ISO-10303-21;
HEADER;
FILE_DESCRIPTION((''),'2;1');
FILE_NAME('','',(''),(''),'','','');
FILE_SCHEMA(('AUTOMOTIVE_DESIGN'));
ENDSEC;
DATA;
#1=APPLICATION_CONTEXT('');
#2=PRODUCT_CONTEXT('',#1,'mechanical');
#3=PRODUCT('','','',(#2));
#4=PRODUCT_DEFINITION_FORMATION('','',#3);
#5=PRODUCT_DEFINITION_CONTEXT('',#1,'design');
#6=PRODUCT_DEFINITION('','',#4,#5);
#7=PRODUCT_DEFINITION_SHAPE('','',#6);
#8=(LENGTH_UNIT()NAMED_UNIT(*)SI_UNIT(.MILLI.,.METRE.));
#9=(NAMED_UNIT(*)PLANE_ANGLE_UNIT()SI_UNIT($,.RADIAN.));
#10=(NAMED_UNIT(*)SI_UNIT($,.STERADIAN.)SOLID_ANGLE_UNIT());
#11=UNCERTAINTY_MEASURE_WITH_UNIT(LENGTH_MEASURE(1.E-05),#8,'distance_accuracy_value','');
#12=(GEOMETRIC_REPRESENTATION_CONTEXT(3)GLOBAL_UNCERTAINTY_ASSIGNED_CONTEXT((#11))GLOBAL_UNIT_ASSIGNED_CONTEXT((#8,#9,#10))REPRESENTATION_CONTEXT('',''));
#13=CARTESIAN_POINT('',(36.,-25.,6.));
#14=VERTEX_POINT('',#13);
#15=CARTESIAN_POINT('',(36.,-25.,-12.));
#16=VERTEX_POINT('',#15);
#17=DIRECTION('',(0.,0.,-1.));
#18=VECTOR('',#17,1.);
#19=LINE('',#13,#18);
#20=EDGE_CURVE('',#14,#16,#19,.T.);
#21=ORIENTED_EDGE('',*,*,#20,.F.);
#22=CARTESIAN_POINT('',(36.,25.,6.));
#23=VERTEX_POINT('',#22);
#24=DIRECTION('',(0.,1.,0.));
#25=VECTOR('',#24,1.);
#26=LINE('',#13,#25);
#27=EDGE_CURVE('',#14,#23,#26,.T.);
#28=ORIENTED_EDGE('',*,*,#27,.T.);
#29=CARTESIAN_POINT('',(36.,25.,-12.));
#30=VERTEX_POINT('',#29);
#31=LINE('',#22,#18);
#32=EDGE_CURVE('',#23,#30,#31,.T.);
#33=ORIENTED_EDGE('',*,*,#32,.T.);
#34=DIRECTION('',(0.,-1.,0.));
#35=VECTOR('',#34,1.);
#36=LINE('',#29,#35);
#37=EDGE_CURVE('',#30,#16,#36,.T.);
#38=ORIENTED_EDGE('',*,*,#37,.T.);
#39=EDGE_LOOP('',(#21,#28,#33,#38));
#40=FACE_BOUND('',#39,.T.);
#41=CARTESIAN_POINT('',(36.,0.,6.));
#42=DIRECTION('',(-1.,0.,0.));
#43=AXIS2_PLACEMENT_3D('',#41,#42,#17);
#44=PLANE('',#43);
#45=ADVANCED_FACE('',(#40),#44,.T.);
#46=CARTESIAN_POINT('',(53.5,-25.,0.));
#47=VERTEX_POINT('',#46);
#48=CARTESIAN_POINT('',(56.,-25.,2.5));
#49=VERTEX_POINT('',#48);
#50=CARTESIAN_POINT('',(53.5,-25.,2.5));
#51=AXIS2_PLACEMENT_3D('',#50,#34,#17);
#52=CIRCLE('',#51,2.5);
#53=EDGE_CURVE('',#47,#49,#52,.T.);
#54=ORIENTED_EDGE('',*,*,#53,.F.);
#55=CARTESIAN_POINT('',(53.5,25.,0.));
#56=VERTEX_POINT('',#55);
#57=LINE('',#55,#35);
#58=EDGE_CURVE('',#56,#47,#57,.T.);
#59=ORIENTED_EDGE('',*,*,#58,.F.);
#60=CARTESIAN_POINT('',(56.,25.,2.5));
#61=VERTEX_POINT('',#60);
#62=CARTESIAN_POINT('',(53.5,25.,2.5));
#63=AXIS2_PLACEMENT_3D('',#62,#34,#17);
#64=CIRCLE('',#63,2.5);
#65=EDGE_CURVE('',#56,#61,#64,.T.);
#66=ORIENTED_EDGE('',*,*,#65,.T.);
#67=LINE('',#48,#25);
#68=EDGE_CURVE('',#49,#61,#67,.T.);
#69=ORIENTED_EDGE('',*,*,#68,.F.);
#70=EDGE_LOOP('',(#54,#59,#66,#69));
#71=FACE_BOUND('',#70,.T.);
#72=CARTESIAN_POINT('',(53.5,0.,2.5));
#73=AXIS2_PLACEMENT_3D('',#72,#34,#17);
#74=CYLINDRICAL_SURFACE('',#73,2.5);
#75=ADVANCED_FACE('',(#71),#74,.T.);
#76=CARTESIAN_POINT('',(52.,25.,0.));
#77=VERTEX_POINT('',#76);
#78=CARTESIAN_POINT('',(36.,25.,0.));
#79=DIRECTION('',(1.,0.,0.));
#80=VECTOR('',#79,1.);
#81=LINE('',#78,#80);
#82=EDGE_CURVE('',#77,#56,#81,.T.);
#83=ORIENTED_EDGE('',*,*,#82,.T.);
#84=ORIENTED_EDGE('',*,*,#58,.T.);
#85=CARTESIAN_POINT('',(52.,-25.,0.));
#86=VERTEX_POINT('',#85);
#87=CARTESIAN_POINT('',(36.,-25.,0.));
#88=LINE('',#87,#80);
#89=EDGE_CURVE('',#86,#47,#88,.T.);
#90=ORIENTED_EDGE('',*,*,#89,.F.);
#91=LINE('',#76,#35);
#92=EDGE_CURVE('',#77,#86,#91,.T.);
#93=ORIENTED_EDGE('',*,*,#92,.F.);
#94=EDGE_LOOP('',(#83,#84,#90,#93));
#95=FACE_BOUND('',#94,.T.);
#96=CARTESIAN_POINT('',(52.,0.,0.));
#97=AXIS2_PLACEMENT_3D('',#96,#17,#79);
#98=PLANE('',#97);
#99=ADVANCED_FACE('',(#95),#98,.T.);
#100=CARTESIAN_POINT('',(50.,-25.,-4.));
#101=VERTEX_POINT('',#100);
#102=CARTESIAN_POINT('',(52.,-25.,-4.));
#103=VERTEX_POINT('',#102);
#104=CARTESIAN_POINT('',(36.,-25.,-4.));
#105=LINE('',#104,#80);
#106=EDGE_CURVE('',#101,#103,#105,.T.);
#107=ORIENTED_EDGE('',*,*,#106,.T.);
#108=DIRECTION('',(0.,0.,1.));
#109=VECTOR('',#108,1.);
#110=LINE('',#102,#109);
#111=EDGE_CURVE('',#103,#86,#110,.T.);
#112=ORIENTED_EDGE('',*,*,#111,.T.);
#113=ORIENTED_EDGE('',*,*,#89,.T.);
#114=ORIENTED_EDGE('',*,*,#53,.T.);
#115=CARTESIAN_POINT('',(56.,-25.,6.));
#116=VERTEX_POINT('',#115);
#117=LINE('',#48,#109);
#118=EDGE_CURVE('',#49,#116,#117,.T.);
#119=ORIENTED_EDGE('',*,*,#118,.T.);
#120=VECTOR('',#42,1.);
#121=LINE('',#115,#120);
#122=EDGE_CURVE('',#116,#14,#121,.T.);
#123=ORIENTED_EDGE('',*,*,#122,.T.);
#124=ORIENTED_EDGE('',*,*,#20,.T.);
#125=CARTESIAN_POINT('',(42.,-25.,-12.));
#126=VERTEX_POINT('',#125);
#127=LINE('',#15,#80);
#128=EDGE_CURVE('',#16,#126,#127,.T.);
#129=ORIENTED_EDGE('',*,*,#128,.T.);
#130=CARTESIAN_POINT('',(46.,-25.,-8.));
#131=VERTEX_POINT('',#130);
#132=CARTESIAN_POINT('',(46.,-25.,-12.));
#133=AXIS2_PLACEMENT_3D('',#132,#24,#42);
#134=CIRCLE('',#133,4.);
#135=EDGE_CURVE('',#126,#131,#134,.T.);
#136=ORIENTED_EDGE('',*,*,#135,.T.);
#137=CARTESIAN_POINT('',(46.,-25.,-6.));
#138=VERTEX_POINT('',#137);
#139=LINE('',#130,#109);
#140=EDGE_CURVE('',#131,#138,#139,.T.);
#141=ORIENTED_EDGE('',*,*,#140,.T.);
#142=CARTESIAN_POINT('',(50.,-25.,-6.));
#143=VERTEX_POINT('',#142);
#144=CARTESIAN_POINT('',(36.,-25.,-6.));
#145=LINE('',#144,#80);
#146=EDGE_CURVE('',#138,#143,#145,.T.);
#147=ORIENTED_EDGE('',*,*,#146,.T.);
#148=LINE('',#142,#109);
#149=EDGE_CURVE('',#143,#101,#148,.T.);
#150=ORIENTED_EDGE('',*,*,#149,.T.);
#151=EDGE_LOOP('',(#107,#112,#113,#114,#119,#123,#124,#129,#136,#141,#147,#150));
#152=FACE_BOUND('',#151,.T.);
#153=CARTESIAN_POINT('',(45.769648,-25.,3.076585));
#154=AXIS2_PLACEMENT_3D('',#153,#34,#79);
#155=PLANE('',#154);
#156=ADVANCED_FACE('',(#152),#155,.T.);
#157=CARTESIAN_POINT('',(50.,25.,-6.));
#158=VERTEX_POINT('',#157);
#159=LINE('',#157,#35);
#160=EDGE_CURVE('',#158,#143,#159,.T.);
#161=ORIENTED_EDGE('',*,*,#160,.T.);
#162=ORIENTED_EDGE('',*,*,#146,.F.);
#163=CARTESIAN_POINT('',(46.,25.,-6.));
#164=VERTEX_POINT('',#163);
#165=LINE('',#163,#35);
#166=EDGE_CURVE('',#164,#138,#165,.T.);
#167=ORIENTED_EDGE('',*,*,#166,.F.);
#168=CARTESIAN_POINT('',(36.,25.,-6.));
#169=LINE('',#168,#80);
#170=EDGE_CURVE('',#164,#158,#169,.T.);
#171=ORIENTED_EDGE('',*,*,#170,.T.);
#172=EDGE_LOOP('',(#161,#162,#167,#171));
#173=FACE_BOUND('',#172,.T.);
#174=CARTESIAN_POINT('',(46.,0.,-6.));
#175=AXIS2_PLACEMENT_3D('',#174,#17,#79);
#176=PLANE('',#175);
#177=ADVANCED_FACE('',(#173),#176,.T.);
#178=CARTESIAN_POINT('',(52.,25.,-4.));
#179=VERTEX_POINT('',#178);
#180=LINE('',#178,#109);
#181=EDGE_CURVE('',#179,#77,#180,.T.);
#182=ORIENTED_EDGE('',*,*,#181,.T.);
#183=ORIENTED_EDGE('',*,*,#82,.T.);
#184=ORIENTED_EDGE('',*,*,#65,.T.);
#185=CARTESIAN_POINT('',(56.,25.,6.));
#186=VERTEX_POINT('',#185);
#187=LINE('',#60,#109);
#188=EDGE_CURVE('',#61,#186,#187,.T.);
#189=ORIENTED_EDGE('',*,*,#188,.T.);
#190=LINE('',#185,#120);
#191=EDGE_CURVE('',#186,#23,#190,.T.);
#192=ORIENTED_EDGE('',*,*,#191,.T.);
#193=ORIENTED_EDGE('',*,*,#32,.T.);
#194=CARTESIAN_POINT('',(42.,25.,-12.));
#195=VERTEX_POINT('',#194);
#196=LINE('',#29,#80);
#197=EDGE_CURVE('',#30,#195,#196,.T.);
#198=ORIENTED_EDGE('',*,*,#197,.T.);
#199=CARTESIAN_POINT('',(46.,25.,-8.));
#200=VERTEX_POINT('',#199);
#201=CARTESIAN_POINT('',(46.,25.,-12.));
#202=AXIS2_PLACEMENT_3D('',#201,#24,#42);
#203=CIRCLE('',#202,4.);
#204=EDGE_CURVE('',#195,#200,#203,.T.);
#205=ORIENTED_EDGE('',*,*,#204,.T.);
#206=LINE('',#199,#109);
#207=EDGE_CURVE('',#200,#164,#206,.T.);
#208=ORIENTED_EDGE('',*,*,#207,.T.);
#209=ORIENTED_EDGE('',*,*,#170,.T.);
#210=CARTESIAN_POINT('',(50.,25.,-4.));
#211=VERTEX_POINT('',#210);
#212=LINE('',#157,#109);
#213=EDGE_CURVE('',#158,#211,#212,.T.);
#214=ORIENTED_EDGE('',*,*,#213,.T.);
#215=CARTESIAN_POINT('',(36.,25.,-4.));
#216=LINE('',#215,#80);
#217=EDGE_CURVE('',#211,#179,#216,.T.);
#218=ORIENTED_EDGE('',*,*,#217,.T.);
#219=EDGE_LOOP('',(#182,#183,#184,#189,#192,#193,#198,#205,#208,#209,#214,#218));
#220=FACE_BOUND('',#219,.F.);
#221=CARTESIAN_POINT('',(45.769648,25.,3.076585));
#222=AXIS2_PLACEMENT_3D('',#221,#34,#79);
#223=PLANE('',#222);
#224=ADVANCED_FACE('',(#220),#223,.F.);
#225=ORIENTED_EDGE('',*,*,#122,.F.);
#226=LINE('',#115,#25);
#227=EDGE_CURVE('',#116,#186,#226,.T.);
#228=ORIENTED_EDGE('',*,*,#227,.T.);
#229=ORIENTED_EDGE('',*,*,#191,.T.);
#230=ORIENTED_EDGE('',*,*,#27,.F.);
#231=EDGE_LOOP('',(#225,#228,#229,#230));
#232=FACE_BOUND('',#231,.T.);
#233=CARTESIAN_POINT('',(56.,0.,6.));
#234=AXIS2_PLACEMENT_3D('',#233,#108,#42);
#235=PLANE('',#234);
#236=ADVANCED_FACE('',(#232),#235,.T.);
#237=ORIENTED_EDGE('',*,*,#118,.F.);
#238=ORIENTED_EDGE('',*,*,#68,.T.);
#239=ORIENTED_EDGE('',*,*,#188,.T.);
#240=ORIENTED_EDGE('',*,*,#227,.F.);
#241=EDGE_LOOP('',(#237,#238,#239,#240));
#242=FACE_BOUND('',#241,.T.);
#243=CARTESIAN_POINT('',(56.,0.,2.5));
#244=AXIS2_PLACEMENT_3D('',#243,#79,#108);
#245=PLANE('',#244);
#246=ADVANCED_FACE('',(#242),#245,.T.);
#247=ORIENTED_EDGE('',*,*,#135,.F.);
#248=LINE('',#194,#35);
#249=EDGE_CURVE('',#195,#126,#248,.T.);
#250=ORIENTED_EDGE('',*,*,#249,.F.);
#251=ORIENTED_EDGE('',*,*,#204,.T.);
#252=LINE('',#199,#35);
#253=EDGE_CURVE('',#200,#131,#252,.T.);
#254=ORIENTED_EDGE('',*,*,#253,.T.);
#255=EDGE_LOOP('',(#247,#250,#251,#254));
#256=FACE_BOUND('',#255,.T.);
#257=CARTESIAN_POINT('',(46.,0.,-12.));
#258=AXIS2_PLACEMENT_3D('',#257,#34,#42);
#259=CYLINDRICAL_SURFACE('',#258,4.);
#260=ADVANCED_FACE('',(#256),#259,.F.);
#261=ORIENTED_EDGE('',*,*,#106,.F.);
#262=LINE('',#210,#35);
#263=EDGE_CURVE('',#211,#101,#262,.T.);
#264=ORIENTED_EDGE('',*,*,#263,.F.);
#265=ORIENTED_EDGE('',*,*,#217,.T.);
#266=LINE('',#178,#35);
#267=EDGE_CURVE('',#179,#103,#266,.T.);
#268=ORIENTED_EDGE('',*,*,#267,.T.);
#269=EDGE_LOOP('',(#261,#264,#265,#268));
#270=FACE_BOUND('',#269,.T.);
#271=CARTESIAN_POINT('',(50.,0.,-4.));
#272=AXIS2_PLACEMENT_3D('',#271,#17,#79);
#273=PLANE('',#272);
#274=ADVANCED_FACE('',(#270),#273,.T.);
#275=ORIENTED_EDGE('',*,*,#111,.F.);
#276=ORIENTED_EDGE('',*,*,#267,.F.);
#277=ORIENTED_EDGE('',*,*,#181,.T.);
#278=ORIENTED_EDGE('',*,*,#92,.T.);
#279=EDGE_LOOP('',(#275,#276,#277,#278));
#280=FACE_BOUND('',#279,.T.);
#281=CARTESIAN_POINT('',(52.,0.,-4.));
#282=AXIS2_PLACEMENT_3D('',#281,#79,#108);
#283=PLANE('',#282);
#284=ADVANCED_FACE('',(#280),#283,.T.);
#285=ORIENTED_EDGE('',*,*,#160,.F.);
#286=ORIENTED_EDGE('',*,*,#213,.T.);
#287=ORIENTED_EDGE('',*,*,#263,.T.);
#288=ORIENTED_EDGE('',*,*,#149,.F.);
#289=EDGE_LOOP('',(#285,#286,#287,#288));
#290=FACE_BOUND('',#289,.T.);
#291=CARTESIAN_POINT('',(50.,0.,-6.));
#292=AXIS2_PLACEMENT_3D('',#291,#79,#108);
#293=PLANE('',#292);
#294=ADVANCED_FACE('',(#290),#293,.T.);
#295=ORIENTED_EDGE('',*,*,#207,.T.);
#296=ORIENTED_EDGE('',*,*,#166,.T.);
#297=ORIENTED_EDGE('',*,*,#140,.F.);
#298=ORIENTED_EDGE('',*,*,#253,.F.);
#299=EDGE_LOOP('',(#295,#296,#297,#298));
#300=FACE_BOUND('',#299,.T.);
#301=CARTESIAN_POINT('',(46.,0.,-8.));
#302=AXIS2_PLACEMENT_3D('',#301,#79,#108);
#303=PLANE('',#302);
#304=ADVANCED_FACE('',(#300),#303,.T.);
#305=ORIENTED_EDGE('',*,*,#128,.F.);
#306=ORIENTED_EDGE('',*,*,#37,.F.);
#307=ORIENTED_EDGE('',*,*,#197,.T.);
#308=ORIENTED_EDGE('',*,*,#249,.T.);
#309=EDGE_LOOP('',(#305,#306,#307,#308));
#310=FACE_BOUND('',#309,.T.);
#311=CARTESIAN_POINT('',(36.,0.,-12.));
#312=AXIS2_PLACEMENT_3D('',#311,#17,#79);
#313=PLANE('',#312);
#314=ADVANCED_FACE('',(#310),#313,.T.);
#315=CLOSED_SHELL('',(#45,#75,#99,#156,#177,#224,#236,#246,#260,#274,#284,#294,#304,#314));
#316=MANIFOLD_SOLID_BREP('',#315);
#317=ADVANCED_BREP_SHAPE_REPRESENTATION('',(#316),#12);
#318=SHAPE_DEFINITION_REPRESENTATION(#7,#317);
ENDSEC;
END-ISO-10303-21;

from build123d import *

# Parameters (mm, degrees)
F1_DEPTH = 25


# Not quite as in the source:
# - a feature names something its author has since deleted; it is built from what else it names


with BuildPart() as f1:
    # F0 (on Front) → F1 (new body, symmetric)
    with BuildSketch(Plane.XZ):
        with BuildLine():
            Line((36, 6), (36, 0))
            Line((36, 0), (52, 0))
            Line((52, 0), (53.5, 0))
            ThreePointArc((53.5, 0), (55.267766953, 0.732233047), (56, 2.5))
            Line((56, 2.5), (56, 6))
            Line((56, 6), (36, 6))
        make_face()
        Polygon((52, 0), (36, 0), (36, -4), (50, -4), (52, -4), align=None)
        Polygon((50, -4), (36, -4), (36, -6), (46, -6), (50, -6), align=None)
        with BuildLine():
            Line((46, -6), (36, -6))
            Line((36, -6), (36, -12))
            Line((36, -12), (42, -12))
            ThreePointArc((42, -12), (43.1715728753, -9.1715728753), (46, -8))
            Line((46, -8), (46, -6))
        make_face()
    extrude(amount=F1_DEPTH, both=True)


solid = f1.part
